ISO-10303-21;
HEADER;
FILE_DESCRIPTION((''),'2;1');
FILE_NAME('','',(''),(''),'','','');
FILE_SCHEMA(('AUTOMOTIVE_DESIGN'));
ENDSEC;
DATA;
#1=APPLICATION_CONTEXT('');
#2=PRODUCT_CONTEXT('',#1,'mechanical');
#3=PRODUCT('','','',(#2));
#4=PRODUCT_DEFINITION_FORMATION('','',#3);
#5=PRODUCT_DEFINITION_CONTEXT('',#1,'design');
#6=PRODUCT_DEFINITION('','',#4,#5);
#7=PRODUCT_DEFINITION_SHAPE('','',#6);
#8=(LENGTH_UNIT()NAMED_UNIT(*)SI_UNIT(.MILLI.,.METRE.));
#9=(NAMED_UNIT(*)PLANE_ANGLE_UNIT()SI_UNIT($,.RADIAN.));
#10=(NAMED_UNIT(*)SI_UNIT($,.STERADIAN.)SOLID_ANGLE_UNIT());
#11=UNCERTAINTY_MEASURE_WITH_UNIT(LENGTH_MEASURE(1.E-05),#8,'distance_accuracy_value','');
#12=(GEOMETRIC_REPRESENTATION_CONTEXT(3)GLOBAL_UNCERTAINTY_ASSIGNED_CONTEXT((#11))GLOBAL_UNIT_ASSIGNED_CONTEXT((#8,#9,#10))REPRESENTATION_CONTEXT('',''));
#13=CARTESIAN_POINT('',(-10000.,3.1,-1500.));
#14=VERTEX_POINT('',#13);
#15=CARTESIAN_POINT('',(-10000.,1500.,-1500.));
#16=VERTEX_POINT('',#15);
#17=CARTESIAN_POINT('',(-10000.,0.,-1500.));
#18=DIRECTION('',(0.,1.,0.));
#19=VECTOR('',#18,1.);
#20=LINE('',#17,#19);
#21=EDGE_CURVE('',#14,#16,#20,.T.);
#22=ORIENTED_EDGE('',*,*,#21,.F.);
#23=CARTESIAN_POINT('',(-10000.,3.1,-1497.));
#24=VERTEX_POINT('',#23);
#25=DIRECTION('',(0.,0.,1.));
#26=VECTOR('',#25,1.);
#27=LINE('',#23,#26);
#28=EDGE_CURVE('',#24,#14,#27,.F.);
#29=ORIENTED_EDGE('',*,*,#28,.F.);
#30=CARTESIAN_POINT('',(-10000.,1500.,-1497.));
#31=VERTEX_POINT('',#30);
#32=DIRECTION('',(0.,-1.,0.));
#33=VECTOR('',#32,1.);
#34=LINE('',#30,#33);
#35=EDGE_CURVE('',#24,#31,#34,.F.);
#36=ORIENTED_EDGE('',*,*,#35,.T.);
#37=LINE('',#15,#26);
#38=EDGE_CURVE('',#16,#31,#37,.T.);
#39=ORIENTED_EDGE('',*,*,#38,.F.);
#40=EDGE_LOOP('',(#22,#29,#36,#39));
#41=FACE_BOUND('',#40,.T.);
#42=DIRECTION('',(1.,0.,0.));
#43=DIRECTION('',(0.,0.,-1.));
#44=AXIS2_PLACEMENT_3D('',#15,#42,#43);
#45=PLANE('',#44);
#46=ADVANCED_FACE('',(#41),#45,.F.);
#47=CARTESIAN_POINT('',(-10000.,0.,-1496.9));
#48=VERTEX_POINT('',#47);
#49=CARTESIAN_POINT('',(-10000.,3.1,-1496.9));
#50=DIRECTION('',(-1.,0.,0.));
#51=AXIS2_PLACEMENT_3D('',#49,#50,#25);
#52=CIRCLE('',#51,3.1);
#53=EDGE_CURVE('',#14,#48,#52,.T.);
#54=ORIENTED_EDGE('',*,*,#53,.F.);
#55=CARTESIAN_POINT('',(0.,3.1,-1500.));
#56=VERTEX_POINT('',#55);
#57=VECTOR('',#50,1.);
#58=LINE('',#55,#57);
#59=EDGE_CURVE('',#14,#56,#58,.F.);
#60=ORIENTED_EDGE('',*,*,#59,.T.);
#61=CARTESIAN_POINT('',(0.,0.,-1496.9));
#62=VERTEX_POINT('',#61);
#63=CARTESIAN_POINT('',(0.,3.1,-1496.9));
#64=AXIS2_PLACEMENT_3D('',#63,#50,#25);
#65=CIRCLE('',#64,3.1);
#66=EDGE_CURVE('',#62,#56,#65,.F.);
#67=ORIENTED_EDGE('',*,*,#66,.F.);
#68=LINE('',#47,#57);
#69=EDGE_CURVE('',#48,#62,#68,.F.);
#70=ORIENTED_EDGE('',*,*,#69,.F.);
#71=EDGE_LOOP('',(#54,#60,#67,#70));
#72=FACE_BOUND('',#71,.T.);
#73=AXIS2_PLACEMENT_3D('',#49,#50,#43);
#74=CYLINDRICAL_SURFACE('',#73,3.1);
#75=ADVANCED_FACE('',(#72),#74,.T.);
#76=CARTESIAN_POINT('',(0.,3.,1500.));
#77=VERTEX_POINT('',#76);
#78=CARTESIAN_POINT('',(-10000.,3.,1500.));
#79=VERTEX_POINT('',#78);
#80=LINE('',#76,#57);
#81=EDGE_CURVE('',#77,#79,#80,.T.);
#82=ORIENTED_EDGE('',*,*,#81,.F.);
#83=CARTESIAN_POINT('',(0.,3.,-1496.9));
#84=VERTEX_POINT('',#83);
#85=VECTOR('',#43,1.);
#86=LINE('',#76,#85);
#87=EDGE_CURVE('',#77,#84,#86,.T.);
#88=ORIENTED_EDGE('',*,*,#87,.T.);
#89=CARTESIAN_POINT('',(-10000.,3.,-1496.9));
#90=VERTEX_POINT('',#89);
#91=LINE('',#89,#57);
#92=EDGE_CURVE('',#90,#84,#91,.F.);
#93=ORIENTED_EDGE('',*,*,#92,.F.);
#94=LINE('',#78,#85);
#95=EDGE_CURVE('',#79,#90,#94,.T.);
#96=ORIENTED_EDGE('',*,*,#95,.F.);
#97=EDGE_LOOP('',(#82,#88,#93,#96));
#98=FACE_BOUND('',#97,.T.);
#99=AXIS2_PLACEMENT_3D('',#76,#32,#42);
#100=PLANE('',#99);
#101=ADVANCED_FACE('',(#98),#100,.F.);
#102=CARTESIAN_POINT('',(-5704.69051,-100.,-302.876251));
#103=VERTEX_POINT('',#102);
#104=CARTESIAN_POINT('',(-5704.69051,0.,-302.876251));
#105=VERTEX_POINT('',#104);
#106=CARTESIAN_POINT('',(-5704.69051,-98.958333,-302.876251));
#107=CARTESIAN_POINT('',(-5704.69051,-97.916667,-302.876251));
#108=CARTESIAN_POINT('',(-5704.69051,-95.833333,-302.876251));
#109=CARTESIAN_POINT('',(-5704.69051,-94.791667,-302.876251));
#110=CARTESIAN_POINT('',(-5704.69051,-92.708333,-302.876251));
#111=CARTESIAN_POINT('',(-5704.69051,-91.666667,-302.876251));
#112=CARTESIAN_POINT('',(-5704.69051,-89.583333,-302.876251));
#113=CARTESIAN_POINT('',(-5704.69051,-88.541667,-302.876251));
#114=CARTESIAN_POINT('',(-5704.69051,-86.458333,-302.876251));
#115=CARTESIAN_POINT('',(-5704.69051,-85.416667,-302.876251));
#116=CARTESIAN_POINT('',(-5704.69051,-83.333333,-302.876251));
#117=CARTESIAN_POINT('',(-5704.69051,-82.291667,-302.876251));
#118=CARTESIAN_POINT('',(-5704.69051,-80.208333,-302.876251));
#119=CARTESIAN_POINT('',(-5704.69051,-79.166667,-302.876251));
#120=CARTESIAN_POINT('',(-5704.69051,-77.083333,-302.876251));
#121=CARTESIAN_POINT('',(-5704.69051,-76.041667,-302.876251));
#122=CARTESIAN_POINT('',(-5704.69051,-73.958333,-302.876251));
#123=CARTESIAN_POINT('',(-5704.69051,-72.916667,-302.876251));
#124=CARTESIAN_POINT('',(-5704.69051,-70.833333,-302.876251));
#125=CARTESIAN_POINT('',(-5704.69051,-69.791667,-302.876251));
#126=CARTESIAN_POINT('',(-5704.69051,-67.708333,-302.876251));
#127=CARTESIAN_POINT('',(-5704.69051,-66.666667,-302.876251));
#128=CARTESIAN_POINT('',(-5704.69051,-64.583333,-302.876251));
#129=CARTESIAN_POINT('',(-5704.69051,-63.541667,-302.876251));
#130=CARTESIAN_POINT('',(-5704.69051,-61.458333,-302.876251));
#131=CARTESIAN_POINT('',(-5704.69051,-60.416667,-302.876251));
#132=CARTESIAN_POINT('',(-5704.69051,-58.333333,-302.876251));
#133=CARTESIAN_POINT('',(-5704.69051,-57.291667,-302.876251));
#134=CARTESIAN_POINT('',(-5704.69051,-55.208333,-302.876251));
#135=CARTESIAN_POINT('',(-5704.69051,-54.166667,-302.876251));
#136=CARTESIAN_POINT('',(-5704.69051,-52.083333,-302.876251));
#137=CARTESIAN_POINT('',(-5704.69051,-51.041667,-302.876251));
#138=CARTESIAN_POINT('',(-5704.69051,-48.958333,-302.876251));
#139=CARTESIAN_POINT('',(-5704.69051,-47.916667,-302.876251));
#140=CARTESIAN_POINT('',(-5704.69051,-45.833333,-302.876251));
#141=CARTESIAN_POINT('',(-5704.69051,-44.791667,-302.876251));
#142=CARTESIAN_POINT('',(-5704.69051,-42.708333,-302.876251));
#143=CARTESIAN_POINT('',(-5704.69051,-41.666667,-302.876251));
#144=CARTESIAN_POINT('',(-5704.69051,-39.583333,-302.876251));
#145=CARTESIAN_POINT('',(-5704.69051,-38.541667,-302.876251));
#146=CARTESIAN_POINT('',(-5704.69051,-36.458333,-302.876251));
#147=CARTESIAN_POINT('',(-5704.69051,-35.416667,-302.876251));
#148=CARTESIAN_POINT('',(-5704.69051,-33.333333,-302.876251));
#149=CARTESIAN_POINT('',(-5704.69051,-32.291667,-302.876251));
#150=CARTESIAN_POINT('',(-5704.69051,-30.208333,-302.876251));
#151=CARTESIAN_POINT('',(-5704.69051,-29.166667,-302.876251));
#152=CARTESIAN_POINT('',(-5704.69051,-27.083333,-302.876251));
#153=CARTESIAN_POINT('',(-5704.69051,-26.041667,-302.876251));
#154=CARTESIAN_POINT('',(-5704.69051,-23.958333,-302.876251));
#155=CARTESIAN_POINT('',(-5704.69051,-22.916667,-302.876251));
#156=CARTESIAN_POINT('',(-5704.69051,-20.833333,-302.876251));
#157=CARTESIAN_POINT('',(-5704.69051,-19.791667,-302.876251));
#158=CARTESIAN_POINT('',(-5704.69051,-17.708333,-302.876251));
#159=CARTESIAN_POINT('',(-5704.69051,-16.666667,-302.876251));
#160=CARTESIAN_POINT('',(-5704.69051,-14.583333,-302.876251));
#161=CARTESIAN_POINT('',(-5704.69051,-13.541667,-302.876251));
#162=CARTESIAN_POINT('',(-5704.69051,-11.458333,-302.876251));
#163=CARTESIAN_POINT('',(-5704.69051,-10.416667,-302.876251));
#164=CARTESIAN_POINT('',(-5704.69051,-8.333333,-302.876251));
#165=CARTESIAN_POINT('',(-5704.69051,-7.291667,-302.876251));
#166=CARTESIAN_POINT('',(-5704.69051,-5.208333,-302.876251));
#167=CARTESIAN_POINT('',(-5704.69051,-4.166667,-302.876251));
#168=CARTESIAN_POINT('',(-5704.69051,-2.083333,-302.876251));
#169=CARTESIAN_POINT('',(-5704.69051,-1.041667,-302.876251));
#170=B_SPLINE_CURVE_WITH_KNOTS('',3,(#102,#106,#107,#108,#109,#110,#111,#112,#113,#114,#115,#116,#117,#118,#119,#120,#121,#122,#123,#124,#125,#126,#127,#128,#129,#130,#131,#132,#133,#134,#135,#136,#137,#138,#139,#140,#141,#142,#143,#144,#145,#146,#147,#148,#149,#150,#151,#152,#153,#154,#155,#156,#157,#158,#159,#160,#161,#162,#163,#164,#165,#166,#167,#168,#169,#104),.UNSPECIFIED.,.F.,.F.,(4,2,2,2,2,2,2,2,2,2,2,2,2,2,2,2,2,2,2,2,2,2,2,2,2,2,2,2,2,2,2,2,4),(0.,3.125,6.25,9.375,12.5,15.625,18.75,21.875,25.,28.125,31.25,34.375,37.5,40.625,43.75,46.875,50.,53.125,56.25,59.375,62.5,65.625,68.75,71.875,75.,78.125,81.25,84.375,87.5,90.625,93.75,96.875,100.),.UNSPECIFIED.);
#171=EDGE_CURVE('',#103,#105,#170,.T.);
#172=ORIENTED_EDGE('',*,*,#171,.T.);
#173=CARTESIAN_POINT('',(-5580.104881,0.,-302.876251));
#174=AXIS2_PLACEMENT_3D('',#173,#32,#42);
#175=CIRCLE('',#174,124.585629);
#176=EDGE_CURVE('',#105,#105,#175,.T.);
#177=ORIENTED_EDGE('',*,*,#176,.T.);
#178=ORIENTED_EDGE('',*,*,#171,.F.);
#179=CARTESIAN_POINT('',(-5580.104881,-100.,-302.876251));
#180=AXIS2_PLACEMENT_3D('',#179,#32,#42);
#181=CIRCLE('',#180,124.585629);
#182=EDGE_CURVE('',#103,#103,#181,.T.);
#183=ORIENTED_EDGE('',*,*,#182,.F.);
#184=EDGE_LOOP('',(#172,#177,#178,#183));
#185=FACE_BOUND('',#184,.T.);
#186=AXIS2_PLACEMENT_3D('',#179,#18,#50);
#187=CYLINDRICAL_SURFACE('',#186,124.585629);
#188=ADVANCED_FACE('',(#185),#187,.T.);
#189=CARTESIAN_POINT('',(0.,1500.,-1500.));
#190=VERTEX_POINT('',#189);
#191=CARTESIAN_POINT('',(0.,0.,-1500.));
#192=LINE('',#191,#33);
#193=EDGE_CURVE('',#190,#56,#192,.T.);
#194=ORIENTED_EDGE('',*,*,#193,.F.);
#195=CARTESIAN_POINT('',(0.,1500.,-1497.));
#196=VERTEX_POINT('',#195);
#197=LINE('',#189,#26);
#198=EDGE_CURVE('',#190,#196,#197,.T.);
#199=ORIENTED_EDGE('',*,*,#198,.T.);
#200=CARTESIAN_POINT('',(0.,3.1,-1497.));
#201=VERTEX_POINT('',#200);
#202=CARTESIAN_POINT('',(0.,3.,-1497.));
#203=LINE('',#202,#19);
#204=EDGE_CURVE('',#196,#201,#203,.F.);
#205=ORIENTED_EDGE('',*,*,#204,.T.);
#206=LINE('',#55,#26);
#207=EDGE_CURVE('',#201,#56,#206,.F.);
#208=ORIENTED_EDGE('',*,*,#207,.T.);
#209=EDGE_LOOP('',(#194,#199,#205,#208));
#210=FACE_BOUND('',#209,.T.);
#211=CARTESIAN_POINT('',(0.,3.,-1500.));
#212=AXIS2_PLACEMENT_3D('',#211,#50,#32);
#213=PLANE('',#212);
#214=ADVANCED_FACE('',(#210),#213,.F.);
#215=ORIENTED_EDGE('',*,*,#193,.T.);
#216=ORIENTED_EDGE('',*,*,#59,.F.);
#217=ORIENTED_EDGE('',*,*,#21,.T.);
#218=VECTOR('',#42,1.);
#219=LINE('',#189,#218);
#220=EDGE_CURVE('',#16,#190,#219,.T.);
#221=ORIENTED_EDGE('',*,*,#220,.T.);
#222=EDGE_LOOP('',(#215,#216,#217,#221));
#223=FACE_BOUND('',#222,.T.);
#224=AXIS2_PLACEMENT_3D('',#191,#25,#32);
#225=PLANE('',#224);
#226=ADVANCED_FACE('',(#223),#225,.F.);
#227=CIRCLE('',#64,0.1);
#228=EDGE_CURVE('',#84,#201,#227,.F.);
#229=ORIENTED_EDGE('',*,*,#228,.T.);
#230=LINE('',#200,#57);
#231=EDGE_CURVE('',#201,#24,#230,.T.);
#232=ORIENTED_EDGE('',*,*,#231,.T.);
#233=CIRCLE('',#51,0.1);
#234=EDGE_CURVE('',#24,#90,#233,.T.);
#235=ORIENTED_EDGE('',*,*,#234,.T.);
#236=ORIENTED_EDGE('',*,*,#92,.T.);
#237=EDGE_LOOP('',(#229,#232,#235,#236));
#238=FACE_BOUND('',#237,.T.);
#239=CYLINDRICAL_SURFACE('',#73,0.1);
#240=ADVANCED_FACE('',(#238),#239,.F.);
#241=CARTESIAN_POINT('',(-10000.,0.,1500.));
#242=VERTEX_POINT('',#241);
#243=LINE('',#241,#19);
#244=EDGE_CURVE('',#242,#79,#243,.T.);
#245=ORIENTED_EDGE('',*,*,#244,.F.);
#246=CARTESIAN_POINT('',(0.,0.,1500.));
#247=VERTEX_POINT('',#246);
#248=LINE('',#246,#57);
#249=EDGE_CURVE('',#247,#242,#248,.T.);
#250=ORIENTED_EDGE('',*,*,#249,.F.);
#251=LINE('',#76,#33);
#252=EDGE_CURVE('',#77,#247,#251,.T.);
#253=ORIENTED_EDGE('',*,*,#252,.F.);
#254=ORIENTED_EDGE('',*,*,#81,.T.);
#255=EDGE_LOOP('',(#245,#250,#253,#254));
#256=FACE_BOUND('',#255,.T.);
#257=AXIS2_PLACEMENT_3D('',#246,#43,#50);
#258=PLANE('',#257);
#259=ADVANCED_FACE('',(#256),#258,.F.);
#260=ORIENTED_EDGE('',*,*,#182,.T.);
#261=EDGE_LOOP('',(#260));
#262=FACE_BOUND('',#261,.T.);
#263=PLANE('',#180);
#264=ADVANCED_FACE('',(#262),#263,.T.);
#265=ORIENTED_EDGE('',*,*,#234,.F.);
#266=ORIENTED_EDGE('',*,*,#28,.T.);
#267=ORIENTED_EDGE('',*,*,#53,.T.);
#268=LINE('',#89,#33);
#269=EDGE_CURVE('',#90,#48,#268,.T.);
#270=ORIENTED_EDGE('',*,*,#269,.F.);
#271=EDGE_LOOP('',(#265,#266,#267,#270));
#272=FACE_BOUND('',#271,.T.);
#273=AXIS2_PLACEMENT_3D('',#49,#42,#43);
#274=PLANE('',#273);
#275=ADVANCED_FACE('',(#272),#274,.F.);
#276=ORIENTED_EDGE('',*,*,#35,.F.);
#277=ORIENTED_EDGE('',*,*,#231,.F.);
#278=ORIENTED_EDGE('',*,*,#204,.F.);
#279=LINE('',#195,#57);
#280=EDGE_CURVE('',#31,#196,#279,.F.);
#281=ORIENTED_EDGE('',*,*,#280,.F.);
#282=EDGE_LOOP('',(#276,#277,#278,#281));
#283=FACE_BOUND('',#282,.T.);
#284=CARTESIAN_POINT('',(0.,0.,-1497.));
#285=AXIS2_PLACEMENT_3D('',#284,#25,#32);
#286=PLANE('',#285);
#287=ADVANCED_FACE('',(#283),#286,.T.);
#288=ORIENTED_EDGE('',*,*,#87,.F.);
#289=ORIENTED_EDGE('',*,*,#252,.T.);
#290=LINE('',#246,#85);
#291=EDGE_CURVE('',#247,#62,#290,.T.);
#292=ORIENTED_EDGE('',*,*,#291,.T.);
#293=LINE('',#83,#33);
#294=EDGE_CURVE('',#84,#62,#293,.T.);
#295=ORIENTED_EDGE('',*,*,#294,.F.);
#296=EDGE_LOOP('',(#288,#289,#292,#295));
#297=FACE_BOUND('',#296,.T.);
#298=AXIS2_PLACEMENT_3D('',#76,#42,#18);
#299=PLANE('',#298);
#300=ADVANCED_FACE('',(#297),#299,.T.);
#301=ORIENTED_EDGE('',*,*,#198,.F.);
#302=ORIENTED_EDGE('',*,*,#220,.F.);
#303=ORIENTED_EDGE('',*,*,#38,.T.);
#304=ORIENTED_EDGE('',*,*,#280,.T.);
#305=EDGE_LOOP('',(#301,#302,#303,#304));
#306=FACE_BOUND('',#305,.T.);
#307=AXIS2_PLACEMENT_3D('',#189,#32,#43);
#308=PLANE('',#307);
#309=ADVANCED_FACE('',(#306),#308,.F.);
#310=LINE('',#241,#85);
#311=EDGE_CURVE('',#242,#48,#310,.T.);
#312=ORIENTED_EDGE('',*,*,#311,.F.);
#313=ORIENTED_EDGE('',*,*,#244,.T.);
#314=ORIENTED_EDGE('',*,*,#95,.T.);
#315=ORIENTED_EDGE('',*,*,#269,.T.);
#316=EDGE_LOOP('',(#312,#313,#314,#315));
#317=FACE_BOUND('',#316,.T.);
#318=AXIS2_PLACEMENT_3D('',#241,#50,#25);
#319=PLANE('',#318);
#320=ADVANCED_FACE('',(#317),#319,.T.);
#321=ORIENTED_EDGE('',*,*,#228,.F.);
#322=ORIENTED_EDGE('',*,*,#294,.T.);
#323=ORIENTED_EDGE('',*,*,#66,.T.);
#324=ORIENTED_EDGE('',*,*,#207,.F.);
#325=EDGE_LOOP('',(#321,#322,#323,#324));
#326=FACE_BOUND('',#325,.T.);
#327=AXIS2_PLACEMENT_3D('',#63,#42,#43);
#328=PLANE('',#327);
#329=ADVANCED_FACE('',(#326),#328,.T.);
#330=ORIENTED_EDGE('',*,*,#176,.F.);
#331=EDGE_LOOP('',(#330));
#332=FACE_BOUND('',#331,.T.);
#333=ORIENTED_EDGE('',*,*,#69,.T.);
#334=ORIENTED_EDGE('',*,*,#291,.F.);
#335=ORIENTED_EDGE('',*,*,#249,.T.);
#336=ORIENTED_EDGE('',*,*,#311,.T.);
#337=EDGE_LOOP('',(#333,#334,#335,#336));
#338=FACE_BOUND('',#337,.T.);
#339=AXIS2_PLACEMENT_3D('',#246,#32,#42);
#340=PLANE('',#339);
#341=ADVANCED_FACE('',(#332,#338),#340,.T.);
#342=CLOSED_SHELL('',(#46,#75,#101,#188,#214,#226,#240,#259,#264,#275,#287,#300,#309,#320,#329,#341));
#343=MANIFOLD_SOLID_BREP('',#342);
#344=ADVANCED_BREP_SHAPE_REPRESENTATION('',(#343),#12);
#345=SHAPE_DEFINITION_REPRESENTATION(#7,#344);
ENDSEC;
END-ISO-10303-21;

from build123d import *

# Parameters (mm, degrees)
SKETCH_1_W                       = 10000
SKETCH_1_H                       = 3
SM_BASE_FLANGE_1_DEPTH           = 1500
SM_EDGE_FLANGE_1_STRIP_W         = 12.2
SM_EDGE_FLANGE_1_STRIP_H         = 3
SM_EDGE_FLANGE_1_STRIP_CUT_DEPTH = 10000
SM_EDGE_FLANGE_1_DEPTH           = 10000
SKETCH_9_R                       = 124.585629419
EXTRUDE_1_DEPTH                  = 100


# Sheet-metal steps are written as plain solids
with BuildPart() as part:
    # Sketch 1 → 基体-法兰1 (new, symmetric)
    with BuildSketch(Plane.XY):
        with Locations((-5000, 1.5)):
            Rectangle(SKETCH_1_W, SKETCH_1_H)
    extrude(amount=SM_BASE_FLANGE_1_DEPTH, both=True)

    # 边线-法兰1 strip (across the edge) → 边线-法兰1 strip cut (cut)
    with BuildSketch(Plane(origin=(0, 3, -1500), x_dir=(0, 0, 1), z_dir=(-1, 0, 0))):
        with Locations((-3, -1.5)):
            Rectangle(SM_EDGE_FLANGE_1_STRIP_W, SM_EDGE_FLANGE_1_STRIP_H)
    extrude(amount=SM_EDGE_FLANGE_1_STRIP_CUT_DEPTH, mode=Mode.SUBTRACT)

    # 边线-法兰1 section (across the edge) → 边线-法兰1 (add)
    with BuildSketch(Plane(origin=(0, 3, -1500), x_dir=(0, 0, 1), z_dir=(-1, 0, 0))):
        with BuildLine():
            Line((0, 0.1), (0, 1497))
            Line((0, 1497), (3, 1497))
            Line((3, 1497), (3, 0.1))
            ThreePointArc((3, 0.1), (3.029289322, 0.029289322), (3.1, 0))
            Line((3.1, 0), (3.1, -3))
            ThreePointArc((3.1, -3), (0.907968978, -2.092031022), (0, 0.1))
        make_face()
    extrude(amount=SM_EDGE_FLANGE_1_DEPTH)

    # 草图9 → 凸台-拉伸1 (add)
    with BuildSketch(Plane.XZ):
        with Locations(Location((-5580.104880993, -302.876251182, 0), (0, 0, 180))):
            Circle(SKETCH_9_R)
    extrude(amount=EXTRUDE_1_DEPTH)


solid = part.part
